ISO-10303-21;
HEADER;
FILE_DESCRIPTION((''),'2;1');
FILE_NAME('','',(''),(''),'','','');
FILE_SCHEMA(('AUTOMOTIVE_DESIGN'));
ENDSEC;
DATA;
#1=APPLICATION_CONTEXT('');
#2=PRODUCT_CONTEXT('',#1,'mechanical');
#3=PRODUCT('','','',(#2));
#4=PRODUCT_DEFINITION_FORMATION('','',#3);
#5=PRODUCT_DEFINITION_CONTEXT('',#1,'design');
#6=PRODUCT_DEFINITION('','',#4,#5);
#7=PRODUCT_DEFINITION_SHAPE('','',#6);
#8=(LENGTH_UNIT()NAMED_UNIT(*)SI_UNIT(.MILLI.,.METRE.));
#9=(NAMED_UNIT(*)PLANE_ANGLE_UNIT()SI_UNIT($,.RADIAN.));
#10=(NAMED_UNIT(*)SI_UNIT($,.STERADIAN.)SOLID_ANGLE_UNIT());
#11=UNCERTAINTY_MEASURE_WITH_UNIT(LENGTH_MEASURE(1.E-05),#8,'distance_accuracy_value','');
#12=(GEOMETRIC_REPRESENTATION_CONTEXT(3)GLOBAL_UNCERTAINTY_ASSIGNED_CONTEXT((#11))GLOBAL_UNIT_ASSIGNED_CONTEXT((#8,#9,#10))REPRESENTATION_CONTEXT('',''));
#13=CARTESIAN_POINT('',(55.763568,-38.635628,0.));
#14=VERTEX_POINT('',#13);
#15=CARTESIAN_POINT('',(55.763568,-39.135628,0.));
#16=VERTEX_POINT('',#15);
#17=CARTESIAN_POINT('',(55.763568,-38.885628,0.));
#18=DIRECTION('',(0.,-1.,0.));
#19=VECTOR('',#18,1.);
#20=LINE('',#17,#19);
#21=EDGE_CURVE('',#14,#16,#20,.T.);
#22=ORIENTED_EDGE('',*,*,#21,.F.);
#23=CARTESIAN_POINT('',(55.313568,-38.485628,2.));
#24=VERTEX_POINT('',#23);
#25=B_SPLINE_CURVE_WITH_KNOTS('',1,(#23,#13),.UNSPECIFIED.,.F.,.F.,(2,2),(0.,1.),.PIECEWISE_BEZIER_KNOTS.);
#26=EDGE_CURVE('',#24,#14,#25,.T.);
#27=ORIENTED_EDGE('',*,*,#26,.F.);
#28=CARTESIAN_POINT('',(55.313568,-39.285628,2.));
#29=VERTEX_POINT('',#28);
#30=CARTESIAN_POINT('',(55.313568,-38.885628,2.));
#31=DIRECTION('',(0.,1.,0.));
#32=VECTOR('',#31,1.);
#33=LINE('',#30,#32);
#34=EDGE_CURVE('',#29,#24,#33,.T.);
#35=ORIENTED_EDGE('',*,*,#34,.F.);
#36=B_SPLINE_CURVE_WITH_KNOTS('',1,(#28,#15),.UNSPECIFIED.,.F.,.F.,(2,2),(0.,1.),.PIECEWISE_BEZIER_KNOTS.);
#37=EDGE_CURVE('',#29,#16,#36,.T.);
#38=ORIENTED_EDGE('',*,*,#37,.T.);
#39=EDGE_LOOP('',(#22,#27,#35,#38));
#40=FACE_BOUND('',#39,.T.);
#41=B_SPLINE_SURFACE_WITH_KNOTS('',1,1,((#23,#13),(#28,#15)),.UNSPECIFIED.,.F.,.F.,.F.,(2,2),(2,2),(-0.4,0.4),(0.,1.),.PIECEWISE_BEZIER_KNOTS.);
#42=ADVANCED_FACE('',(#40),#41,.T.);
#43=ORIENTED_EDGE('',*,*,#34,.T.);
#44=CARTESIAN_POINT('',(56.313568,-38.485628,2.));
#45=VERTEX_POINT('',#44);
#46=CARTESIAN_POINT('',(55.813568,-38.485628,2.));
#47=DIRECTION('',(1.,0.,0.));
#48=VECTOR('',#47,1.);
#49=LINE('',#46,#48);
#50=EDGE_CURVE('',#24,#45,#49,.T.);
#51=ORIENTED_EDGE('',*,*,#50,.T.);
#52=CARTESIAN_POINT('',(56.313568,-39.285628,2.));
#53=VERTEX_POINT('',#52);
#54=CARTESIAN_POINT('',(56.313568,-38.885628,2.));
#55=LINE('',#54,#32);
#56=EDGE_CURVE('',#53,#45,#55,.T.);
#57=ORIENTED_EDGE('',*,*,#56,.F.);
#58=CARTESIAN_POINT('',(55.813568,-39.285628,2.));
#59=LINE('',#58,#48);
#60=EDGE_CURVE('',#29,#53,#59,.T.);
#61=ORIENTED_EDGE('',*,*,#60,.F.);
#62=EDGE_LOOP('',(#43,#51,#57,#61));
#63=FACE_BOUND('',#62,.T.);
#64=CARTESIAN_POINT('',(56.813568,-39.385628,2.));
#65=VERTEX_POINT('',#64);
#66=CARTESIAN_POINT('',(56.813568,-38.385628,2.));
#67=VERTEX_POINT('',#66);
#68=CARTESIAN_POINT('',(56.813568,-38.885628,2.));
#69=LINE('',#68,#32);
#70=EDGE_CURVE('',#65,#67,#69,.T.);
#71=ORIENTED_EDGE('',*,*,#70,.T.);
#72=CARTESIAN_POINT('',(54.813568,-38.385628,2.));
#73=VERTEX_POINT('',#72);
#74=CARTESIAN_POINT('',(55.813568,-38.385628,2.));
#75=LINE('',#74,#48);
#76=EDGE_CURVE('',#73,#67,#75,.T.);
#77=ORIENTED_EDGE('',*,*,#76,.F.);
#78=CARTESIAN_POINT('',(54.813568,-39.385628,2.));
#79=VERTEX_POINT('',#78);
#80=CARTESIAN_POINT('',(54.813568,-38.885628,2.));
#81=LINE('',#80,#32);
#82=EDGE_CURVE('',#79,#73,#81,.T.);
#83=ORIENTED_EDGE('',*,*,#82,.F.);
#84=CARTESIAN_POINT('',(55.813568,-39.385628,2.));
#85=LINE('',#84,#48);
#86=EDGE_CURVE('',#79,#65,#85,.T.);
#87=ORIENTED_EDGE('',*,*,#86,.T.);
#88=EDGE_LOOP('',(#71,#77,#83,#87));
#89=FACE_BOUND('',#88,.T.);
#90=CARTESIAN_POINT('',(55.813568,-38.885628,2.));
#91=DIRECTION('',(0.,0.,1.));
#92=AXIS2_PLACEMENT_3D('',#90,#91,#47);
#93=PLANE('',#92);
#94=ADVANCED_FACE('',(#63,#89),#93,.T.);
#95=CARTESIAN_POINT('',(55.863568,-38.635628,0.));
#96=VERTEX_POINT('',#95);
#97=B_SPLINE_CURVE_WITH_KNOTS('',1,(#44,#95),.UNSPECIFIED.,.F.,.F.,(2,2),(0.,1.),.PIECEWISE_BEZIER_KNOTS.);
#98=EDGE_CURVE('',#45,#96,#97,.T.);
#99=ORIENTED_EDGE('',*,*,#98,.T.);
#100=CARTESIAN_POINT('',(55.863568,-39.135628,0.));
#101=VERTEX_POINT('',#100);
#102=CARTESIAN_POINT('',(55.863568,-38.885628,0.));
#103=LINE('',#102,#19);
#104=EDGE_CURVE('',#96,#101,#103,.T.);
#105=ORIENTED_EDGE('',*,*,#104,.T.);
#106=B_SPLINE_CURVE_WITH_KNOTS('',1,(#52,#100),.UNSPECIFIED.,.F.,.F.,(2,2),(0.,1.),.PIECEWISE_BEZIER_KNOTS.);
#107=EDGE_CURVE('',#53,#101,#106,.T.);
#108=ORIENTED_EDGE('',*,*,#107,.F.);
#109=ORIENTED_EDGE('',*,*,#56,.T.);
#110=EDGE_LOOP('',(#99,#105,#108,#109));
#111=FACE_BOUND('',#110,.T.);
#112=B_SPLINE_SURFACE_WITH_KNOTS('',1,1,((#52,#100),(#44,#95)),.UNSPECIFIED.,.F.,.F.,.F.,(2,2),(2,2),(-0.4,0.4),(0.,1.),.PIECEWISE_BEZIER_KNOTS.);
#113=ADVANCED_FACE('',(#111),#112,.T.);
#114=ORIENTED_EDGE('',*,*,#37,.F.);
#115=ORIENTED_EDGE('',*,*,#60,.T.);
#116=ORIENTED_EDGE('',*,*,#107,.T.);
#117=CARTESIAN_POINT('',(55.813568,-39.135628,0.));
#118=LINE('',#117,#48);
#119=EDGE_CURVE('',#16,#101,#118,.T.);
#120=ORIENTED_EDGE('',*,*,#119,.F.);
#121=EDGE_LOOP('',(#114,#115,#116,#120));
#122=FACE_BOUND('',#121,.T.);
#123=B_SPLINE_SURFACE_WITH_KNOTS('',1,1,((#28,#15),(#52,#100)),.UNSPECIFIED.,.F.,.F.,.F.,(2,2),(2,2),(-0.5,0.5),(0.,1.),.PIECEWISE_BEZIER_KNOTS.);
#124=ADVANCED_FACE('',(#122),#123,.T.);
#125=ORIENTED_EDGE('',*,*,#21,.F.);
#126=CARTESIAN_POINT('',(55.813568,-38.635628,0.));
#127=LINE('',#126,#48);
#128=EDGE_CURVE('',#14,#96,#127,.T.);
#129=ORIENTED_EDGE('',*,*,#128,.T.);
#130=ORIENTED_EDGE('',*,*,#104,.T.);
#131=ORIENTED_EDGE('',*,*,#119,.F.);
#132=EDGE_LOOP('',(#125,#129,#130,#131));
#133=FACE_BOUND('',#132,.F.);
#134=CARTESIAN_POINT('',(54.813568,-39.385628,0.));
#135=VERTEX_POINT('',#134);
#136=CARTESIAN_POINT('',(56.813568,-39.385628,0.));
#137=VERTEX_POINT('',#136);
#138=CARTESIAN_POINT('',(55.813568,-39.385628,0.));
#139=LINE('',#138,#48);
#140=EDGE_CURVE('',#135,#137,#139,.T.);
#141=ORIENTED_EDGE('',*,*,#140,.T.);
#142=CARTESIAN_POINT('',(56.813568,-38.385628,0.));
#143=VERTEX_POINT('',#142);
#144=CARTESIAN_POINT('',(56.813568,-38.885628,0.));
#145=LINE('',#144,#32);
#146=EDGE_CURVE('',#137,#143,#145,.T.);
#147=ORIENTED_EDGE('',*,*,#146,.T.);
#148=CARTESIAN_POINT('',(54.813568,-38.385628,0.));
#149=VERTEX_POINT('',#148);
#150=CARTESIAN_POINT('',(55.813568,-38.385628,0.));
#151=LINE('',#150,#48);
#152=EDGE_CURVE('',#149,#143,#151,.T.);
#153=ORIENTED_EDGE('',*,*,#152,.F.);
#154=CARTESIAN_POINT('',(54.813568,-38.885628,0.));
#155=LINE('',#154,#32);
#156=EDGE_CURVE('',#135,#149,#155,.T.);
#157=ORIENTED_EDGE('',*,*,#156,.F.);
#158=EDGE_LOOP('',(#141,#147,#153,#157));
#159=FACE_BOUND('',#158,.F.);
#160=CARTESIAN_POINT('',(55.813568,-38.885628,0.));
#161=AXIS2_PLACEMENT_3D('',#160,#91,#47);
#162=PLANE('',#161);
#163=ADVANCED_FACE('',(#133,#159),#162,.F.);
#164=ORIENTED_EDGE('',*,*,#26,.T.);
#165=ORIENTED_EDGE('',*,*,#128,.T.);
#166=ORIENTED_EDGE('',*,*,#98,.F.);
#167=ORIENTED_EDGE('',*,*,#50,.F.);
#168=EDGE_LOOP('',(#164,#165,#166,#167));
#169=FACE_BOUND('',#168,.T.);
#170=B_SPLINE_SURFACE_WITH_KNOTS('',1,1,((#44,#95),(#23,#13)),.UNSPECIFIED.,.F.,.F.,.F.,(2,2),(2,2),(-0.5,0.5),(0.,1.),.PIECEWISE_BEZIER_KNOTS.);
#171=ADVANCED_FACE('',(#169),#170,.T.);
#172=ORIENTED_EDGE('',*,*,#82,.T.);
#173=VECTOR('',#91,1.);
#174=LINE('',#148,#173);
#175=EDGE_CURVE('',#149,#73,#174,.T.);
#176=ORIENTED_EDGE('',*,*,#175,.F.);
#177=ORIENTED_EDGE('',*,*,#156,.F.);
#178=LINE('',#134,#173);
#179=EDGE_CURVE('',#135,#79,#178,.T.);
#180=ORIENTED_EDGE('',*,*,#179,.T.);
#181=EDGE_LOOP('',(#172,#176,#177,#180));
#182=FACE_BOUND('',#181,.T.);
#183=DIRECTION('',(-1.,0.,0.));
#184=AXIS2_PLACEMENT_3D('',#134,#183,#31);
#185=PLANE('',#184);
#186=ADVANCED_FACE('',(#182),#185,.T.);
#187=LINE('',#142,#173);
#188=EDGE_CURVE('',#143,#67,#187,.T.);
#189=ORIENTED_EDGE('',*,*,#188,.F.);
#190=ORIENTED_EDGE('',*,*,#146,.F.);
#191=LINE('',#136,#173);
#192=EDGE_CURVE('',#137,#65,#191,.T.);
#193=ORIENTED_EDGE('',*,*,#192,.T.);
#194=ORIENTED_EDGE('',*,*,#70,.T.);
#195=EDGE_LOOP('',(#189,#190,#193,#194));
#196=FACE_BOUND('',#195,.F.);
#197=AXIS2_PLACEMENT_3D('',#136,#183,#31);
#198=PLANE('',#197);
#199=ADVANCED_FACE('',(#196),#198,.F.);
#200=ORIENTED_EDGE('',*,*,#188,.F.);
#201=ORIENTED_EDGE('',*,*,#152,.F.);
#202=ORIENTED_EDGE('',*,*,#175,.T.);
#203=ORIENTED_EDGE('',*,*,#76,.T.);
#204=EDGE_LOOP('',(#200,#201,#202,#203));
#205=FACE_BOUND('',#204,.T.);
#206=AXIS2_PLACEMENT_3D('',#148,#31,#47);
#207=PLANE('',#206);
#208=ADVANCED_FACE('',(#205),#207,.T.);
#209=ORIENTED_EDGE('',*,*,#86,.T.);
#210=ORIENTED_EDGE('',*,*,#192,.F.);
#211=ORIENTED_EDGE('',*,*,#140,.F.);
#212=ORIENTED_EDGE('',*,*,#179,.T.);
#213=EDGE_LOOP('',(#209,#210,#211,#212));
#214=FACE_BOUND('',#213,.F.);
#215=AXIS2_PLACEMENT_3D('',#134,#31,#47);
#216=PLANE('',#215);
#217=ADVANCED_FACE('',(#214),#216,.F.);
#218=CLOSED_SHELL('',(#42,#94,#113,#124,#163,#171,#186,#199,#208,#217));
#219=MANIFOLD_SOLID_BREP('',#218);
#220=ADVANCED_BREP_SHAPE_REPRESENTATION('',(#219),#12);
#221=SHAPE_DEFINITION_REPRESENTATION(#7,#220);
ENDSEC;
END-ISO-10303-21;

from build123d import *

# Parameters (mm, degrees)
F0_W     = 2
F0_H     = 1
F1_DEPTH = 2
F2_W     = 1
F2_H     = 0.8
F3_W     = 0.1
F3_H     = 0.5


with BuildPart() as f1:
    # F0 (on Top) → F1 (new body)
    with BuildSketch(Plane.XY):
        with Locations((55.8135678768, -38.8856279552)):
            Rectangle(F0_W, F0_H)
    extrude(amount=F1_DEPTH)

    # F2 (on face) → F4 section 0
    with BuildSketch(Plane.XY.offset(2)):
        with Locations((55.8135678768, -38.8856279552)):
            Rectangle(F2_W, F2_H)
    # F3 (on face) → F4 section 1
    with BuildSketch(Plane(origin=(0, 0, 0), x_dir=(1, 0, 0), z_dir=(0, 0, -1))):
        with Locations((55.8135678768, 38.8856279552)):
            Rectangle(F3_W, F3_H)
    loft(mode=Mode.SUBTRACT)


solid = f1.part
